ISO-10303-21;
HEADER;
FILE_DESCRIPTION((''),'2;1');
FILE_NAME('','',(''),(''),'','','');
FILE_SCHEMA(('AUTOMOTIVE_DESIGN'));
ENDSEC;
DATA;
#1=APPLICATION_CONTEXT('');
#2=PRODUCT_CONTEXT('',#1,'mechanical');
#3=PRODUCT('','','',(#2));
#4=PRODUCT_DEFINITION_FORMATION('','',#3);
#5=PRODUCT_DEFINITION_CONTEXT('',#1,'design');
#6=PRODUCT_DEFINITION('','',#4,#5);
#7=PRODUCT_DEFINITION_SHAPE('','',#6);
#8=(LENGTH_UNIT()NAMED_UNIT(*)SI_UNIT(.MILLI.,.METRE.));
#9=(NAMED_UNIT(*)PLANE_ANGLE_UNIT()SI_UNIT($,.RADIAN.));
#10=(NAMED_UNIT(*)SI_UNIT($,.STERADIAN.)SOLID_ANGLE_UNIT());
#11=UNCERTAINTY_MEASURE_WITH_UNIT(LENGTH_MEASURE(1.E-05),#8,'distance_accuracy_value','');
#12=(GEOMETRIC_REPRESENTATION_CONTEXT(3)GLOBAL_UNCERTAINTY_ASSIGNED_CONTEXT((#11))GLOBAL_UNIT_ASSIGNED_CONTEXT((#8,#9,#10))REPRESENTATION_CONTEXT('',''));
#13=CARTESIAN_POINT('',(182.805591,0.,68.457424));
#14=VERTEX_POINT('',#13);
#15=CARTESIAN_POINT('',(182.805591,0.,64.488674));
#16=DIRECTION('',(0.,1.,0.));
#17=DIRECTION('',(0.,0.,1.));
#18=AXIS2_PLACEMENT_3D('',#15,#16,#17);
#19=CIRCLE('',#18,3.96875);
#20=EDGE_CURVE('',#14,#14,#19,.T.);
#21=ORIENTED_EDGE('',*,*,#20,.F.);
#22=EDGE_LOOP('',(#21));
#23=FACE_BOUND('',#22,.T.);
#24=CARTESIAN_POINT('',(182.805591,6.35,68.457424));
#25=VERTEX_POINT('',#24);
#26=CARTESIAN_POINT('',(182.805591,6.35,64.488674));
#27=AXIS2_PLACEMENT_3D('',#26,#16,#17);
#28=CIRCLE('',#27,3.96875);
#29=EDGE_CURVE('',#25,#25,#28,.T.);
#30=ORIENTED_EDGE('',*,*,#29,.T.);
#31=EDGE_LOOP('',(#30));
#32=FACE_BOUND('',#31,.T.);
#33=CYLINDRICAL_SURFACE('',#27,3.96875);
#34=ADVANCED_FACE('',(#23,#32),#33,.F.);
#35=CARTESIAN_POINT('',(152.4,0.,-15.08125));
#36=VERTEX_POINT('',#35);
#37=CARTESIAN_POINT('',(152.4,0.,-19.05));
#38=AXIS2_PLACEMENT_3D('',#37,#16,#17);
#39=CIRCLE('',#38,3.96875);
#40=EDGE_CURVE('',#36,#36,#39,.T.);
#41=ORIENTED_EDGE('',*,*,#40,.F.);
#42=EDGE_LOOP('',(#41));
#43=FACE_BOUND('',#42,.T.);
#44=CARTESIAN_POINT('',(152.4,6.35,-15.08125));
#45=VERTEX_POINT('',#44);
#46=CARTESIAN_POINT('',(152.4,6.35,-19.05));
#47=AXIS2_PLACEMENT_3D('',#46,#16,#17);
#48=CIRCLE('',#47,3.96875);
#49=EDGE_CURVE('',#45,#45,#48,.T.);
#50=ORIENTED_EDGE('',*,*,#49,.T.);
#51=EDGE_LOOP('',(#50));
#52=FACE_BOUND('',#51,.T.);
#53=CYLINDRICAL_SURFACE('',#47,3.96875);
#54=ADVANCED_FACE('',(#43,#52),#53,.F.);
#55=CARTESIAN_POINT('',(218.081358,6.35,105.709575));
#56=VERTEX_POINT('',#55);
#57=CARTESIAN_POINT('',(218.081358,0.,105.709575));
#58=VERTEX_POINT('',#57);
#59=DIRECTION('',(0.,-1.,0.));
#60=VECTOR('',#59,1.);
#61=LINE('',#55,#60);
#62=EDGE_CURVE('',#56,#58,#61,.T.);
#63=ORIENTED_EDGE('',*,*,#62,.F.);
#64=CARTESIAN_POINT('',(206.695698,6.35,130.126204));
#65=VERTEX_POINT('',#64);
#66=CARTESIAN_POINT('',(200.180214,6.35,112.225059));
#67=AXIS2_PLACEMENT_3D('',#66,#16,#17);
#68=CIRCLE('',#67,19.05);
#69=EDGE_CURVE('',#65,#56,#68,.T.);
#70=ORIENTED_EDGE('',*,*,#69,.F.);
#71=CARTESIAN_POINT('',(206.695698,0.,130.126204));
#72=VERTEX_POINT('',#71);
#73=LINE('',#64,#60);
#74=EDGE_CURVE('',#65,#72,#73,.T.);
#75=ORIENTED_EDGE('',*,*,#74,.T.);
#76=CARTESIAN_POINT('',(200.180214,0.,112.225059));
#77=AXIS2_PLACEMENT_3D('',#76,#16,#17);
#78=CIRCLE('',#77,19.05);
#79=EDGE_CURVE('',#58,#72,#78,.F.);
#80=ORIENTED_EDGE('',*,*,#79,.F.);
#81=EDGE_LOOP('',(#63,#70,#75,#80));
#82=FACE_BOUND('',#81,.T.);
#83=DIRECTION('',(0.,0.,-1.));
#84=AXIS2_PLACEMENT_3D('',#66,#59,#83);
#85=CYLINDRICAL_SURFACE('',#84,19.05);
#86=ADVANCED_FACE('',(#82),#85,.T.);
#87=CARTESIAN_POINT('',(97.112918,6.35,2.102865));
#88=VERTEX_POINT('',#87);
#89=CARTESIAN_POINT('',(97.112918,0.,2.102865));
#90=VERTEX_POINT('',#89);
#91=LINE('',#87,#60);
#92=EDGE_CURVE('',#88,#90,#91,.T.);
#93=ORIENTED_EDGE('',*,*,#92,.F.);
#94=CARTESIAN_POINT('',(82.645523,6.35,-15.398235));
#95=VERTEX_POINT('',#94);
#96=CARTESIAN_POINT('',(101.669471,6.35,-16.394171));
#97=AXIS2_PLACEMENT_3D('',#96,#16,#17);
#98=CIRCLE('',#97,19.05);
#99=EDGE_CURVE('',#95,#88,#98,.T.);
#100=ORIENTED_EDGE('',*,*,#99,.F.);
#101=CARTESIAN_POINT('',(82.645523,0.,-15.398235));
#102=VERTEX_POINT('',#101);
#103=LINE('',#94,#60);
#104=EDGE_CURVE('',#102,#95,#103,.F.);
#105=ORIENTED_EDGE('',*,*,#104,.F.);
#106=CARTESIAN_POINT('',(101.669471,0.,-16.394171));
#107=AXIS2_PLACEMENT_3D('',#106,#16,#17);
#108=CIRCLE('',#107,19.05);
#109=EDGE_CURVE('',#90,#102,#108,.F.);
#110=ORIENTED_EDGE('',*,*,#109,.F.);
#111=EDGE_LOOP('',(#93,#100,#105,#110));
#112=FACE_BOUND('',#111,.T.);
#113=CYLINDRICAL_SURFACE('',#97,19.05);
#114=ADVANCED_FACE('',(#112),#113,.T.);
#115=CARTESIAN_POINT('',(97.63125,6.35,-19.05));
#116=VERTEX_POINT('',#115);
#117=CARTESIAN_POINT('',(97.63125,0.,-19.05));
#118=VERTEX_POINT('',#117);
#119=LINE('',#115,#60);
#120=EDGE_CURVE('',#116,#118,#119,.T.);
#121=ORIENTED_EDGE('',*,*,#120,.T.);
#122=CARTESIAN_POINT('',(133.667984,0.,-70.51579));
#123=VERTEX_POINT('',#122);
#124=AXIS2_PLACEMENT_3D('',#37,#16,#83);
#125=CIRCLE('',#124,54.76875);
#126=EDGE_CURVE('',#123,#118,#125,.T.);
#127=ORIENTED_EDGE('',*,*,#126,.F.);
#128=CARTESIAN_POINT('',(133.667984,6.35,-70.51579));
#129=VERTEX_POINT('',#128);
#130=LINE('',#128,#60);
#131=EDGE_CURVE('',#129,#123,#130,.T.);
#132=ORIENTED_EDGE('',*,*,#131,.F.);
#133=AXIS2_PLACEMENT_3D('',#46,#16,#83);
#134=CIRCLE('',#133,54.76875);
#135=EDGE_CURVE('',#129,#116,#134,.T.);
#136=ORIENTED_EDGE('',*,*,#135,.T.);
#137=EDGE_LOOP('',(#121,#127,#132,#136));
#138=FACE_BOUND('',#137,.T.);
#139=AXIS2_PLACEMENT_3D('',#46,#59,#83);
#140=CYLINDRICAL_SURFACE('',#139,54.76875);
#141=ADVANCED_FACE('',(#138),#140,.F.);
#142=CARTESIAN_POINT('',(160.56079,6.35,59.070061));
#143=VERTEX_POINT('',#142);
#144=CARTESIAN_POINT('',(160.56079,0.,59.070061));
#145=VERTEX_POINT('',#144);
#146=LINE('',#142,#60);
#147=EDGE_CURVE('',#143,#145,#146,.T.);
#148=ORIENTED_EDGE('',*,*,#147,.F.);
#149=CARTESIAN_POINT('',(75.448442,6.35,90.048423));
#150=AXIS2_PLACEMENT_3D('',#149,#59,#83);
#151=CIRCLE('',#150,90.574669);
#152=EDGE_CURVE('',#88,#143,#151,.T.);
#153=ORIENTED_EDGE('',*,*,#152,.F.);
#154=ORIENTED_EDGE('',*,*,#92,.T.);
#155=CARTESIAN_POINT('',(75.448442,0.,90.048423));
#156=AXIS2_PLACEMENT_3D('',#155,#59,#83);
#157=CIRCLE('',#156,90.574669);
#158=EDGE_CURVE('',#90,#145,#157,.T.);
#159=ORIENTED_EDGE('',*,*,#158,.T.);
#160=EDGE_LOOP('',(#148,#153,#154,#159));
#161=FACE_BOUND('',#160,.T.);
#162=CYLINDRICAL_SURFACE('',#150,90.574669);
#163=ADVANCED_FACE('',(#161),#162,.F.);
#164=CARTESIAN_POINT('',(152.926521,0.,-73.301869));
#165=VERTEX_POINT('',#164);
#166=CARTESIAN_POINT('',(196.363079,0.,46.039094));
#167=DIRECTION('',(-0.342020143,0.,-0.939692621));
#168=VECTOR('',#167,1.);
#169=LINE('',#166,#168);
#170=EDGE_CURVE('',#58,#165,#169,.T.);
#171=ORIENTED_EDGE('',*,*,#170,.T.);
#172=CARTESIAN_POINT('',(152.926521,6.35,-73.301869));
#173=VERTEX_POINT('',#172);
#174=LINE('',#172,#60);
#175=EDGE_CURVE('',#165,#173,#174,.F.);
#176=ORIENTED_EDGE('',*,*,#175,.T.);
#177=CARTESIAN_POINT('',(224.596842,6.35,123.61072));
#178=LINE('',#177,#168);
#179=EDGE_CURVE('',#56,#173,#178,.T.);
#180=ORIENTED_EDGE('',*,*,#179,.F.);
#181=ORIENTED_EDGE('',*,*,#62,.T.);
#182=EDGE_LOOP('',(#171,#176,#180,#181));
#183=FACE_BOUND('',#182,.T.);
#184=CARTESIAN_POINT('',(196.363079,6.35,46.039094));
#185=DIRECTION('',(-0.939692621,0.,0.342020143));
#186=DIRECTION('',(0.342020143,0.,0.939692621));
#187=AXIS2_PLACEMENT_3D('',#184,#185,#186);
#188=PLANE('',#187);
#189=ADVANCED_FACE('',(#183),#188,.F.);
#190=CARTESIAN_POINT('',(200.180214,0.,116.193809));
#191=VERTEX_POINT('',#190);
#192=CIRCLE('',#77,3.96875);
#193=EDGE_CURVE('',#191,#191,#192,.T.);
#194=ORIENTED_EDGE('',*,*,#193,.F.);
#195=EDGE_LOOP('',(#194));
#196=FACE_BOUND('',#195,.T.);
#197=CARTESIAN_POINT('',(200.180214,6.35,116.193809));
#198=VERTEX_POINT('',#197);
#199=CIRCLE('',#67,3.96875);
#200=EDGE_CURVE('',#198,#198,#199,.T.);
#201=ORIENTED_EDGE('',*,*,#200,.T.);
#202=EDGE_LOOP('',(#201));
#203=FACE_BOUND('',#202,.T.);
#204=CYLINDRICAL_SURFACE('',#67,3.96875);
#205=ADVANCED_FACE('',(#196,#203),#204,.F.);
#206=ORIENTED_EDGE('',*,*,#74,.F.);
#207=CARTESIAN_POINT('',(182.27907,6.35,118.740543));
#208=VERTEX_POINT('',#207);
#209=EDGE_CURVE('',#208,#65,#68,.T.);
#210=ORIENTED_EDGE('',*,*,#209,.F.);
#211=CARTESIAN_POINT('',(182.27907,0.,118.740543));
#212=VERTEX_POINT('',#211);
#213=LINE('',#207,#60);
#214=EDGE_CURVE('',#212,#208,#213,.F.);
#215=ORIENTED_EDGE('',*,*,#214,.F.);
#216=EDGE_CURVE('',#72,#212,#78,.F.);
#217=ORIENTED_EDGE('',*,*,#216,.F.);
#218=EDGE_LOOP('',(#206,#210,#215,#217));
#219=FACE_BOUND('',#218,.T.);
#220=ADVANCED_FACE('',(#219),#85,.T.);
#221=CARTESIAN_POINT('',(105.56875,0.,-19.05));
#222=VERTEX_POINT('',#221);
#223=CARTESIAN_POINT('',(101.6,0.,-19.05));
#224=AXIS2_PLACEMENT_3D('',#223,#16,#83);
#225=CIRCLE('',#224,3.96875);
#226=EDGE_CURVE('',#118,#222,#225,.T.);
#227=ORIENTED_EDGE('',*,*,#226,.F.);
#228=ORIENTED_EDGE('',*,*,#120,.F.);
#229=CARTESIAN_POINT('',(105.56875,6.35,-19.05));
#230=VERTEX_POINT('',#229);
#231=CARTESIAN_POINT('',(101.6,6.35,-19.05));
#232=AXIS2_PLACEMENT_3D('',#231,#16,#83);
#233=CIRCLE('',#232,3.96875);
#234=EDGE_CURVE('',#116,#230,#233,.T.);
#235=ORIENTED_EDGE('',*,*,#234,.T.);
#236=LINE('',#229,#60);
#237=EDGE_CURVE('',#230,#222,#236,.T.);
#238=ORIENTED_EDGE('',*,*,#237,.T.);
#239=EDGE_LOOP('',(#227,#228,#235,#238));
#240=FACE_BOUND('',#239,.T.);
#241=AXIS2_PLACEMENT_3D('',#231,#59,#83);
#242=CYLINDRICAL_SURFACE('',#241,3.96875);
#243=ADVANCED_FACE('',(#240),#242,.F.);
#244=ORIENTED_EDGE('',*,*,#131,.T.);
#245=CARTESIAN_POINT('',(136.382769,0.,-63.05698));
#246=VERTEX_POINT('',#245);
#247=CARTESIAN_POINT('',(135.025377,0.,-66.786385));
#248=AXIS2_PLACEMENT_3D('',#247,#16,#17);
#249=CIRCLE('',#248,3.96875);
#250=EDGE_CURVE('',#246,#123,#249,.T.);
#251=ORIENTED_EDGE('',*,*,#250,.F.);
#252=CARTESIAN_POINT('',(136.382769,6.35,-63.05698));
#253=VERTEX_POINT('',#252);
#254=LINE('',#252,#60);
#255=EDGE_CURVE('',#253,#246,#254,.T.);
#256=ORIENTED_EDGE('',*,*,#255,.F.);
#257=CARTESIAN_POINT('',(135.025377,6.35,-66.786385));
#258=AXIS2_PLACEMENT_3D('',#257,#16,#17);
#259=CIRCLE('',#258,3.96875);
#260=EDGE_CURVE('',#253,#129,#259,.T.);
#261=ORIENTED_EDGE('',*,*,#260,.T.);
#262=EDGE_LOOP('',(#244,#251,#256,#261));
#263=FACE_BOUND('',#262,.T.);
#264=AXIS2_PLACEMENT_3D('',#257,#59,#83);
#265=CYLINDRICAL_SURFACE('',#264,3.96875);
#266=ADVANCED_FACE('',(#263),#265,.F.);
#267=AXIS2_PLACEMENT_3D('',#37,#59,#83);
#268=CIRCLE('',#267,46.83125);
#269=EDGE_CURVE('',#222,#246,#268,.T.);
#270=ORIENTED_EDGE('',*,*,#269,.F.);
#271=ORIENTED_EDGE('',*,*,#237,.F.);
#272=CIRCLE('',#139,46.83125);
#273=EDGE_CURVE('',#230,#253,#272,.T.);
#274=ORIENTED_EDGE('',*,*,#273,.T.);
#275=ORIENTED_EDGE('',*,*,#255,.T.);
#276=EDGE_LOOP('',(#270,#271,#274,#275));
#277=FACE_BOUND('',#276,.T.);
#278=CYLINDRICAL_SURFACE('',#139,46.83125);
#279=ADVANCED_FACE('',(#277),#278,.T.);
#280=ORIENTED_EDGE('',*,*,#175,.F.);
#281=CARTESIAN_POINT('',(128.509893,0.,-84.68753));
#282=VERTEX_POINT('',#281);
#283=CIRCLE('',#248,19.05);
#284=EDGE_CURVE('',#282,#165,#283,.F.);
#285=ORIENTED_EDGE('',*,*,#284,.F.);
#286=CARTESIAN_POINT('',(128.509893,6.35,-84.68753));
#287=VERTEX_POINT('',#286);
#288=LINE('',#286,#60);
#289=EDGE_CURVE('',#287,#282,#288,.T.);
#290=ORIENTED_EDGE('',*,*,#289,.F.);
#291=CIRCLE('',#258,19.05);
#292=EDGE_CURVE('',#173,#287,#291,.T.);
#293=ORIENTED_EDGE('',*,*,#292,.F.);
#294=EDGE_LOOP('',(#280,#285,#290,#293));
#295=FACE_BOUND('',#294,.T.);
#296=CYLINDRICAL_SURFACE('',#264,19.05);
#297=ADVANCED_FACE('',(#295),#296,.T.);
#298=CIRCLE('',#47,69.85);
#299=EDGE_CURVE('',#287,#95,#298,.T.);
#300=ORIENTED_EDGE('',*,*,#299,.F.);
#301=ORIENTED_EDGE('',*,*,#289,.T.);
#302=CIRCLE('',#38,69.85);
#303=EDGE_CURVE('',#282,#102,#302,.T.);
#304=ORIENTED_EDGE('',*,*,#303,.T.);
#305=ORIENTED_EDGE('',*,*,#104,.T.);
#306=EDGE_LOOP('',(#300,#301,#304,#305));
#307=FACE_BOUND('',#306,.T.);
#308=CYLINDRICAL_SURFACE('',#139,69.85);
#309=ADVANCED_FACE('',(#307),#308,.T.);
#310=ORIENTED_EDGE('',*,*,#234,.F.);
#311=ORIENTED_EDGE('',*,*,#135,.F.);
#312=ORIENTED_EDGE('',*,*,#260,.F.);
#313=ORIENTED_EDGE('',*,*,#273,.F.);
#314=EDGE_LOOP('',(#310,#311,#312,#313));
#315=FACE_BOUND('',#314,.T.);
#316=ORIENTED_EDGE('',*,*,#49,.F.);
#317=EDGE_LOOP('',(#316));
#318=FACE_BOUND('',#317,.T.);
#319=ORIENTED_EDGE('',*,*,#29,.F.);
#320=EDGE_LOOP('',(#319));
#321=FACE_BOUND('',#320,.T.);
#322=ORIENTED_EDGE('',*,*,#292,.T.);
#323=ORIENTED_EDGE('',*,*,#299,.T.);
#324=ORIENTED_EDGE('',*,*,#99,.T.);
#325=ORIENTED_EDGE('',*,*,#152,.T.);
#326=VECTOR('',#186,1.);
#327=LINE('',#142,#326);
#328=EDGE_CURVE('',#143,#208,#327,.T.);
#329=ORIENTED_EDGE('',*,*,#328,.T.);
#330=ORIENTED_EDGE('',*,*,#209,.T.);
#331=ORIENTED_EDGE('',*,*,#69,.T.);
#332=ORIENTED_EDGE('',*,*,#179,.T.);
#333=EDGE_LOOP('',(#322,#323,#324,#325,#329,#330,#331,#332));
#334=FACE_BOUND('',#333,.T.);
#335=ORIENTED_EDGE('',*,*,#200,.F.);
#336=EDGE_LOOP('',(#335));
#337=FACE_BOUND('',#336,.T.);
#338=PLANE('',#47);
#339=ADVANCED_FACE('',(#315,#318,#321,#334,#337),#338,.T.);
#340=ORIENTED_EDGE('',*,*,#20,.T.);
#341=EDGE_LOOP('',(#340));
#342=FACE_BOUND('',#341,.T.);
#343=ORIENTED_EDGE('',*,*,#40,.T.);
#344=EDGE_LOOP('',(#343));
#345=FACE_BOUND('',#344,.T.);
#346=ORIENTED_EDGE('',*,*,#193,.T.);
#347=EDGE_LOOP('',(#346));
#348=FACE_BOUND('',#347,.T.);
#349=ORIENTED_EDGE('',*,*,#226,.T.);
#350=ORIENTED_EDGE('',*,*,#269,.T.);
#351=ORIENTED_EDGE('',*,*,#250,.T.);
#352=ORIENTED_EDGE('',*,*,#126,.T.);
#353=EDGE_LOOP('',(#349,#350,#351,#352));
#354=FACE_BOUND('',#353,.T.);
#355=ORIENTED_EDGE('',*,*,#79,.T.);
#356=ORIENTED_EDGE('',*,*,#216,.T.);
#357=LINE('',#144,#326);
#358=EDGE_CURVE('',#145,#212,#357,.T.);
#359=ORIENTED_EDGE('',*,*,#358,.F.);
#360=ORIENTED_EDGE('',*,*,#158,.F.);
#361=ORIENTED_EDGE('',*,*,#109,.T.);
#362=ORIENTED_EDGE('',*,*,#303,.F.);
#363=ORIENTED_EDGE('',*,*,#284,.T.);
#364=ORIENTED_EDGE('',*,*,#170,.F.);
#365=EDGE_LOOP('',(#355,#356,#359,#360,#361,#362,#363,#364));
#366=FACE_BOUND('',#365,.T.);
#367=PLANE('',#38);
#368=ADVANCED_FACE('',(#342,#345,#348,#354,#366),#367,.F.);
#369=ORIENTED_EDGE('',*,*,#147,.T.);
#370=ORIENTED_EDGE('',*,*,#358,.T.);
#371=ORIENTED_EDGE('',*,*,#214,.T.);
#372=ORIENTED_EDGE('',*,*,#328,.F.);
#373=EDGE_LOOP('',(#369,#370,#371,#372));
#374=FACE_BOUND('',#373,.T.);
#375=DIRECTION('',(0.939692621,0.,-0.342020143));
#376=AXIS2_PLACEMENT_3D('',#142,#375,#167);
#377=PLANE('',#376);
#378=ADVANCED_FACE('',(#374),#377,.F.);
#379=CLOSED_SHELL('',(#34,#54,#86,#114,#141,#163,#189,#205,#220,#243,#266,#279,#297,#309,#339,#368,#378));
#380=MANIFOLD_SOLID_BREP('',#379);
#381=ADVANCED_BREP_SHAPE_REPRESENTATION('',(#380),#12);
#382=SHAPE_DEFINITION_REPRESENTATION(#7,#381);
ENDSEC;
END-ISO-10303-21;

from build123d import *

# Parameters (mm, degrees)
BOSS_EXTRUDE3_DEPTH            = 6.35
F_5_16_0_3125_DIAMETER_HOLE2_D = 7.9375
FILLET2_R                      = 19.05


with BuildPart() as part:
    # Sketch1 → Boss-Extrude3 (new body)
    with BuildSketch(Plane(origin=(0, 0, 0), x_dir=(1, 0, 0), z_dir=(0, 1, 0))):
        with BuildLine():
            Line((160.560790495, -59.070061434), (188.794553327, -136.64168728))
            Line((188.794553327, -136.64168728), (224.596842179, -123.610719819))
            Line((224.596842179, -123.610719819), (196.363079347, -46.039093974))
            Line((196.363079347, -46.039093974), (147.316678264, 88.71478551))
            ThreePointArc((147.316678264, 88.71478551), (95.182229706, 59.114314079), (85.197916699, 0))
            ThreePointArc((85.197916699, 0), (131.323386462, -18.761949266), (160.560790495, -59.070061434))
        make_face()
        with BuildLine():
            ThreePointArc((105.56875, 19.05), (114.038085826, 45.911301485), (136.382769163, 63.056980047))
            ThreePointArc((136.382769163, 63.056980047), (138.754781808, 68.14377758), (133.667984275, 70.515790225))
            ThreePointArc((133.667984275, 70.515790225), (107.536066474, 50.464064448), (97.63125, 19.05))
            ThreePointArc((97.63125, 19.05), (101.6, 15.08125), (105.56875, 19.05))
        make_face(mode=Mode.SUBTRACT)
    extrude(amount=BOSS_EXTRUDE3_DEPTH)

    # 5/16 (0.3125) Diameter Hole2 (through all)
    with Locations(Plane(origin=(0, 6.35, 0), x_dir=(1, 0, 0), z_dir=(0, 1, 0))):
        with Locations((152.4, 19.05), (182.805590742, -64.488673988), (200.180214023, -112.225059124)):
            Hole(F_5_16_0_3125_DIAMETER_HOLE2_D / 2)

    # Fillet2
    fillet2_edges = [part.edges().sort_by_distance(p)[0] for p in [
        (147.316678264, 3.175, -88.71478551),
        (224.596842179, 3.175, 123.610719819),
        (188.794553327, 3.175, 136.64168728),
        (85.197916699, 3.175, 0),
    ]]
    fillet(fillet2_edges, radius=FILLET2_R - 0.0001)  # a hair under: the kernel refuses the full size


solid = part.part
